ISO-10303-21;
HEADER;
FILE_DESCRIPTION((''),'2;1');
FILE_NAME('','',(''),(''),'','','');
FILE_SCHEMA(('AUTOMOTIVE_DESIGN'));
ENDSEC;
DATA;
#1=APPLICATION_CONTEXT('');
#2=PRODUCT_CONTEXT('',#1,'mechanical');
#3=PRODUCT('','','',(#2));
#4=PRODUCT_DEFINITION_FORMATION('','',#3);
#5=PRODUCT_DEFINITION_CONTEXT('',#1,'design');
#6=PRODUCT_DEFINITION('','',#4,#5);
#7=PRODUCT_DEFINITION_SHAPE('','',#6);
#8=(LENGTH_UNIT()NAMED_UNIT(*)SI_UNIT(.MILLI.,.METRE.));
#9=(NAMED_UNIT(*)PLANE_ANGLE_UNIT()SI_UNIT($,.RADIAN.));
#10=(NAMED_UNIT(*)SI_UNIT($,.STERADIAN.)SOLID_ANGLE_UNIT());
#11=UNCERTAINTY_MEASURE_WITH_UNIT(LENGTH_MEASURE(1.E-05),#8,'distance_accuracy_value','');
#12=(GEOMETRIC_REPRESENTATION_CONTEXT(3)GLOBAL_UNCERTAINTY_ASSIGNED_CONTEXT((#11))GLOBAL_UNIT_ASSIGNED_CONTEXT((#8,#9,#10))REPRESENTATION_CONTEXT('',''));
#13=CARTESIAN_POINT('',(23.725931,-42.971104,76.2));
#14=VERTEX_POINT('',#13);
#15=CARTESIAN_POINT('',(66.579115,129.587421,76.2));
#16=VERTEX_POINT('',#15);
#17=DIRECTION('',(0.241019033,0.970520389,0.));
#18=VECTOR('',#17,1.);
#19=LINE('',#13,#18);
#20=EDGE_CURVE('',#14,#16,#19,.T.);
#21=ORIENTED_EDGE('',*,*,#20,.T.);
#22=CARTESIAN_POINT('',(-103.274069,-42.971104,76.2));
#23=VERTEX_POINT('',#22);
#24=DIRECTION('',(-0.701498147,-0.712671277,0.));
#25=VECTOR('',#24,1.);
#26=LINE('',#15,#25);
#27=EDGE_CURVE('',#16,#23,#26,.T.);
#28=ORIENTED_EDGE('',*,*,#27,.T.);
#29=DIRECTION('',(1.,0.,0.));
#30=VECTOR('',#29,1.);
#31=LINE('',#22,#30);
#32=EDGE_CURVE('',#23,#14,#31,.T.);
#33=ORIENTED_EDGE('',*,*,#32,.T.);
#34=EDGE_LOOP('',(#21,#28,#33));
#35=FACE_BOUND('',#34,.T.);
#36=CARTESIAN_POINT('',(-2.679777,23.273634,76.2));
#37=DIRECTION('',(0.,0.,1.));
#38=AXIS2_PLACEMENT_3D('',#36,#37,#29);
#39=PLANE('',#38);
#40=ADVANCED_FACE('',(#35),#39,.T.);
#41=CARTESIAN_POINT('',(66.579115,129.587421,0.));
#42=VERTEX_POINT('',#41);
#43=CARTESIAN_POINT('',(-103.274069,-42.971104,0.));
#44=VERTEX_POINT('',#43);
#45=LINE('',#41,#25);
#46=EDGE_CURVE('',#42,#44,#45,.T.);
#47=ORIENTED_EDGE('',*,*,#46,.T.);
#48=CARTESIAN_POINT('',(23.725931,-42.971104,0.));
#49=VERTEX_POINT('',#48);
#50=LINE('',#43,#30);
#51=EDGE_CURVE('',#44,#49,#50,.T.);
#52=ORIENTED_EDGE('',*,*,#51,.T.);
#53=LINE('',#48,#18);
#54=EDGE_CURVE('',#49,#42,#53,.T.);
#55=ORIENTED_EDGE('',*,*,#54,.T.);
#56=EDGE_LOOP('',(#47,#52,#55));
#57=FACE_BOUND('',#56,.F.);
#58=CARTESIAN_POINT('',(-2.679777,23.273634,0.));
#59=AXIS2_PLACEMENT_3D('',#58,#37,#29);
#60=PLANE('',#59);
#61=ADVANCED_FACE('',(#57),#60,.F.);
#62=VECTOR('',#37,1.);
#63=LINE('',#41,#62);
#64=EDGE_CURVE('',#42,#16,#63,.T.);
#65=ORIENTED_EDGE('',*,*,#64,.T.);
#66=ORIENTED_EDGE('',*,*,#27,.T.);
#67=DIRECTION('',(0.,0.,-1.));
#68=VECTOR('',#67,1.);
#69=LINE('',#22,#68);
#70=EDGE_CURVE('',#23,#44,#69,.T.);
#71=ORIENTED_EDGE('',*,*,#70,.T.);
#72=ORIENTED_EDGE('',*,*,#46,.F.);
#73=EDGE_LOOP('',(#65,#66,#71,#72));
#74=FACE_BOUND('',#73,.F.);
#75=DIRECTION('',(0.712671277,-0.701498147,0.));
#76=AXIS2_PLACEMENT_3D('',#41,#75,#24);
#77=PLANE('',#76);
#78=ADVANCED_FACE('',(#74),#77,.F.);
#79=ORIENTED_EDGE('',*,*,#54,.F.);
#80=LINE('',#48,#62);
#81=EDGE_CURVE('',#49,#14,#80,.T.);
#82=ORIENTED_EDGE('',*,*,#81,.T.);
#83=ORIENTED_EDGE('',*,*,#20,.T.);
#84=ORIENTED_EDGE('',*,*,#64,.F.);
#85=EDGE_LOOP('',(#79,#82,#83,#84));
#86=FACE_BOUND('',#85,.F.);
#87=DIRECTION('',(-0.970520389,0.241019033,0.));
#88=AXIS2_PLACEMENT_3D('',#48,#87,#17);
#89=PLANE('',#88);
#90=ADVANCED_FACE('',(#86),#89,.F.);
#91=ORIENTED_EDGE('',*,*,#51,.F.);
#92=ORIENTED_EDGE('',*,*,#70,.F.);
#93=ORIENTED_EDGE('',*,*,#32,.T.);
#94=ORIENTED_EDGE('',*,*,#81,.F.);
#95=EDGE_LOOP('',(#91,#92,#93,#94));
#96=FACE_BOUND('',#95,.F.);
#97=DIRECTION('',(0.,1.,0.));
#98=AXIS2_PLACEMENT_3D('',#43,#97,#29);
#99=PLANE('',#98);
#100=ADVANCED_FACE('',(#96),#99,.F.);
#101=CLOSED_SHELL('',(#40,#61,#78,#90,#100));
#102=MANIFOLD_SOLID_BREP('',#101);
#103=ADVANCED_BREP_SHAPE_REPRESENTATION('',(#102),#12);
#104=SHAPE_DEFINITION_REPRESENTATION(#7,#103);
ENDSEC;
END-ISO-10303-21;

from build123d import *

# Parameters (mm, degrees)
F1_DEPTH = 76.2
F3_DEPTH = 2


# Not quite as in the source:
# - a feature of the source that left no trace in its solid (it failed there, or was rolled back) is left out


with BuildPart() as f1:
    # F0 (on Top) → F1 (new body)
    with BuildSketch(Plane.XY):
        Polygon((-103.2740693459, -42.971104271), (23.7259306541, -42.971104271), (66.5791147949, 129.5874208994), align=None)
    extrude(amount=F1_DEPTH)

    # F2 (on face) → F3 (join)
    with BuildSketch(Plane(origin=(0, 0, 0), x_dir=(1, 0, 0), z_dir=(0, 0, -1))):
        Polygon((23.7259306541, 42.971104271), (-103.2740693459, 42.971104271), (66.5791147949, -129.5874208994), align=None)
    extrude(amount=-F3_DEPTH)


solid = f1.part
